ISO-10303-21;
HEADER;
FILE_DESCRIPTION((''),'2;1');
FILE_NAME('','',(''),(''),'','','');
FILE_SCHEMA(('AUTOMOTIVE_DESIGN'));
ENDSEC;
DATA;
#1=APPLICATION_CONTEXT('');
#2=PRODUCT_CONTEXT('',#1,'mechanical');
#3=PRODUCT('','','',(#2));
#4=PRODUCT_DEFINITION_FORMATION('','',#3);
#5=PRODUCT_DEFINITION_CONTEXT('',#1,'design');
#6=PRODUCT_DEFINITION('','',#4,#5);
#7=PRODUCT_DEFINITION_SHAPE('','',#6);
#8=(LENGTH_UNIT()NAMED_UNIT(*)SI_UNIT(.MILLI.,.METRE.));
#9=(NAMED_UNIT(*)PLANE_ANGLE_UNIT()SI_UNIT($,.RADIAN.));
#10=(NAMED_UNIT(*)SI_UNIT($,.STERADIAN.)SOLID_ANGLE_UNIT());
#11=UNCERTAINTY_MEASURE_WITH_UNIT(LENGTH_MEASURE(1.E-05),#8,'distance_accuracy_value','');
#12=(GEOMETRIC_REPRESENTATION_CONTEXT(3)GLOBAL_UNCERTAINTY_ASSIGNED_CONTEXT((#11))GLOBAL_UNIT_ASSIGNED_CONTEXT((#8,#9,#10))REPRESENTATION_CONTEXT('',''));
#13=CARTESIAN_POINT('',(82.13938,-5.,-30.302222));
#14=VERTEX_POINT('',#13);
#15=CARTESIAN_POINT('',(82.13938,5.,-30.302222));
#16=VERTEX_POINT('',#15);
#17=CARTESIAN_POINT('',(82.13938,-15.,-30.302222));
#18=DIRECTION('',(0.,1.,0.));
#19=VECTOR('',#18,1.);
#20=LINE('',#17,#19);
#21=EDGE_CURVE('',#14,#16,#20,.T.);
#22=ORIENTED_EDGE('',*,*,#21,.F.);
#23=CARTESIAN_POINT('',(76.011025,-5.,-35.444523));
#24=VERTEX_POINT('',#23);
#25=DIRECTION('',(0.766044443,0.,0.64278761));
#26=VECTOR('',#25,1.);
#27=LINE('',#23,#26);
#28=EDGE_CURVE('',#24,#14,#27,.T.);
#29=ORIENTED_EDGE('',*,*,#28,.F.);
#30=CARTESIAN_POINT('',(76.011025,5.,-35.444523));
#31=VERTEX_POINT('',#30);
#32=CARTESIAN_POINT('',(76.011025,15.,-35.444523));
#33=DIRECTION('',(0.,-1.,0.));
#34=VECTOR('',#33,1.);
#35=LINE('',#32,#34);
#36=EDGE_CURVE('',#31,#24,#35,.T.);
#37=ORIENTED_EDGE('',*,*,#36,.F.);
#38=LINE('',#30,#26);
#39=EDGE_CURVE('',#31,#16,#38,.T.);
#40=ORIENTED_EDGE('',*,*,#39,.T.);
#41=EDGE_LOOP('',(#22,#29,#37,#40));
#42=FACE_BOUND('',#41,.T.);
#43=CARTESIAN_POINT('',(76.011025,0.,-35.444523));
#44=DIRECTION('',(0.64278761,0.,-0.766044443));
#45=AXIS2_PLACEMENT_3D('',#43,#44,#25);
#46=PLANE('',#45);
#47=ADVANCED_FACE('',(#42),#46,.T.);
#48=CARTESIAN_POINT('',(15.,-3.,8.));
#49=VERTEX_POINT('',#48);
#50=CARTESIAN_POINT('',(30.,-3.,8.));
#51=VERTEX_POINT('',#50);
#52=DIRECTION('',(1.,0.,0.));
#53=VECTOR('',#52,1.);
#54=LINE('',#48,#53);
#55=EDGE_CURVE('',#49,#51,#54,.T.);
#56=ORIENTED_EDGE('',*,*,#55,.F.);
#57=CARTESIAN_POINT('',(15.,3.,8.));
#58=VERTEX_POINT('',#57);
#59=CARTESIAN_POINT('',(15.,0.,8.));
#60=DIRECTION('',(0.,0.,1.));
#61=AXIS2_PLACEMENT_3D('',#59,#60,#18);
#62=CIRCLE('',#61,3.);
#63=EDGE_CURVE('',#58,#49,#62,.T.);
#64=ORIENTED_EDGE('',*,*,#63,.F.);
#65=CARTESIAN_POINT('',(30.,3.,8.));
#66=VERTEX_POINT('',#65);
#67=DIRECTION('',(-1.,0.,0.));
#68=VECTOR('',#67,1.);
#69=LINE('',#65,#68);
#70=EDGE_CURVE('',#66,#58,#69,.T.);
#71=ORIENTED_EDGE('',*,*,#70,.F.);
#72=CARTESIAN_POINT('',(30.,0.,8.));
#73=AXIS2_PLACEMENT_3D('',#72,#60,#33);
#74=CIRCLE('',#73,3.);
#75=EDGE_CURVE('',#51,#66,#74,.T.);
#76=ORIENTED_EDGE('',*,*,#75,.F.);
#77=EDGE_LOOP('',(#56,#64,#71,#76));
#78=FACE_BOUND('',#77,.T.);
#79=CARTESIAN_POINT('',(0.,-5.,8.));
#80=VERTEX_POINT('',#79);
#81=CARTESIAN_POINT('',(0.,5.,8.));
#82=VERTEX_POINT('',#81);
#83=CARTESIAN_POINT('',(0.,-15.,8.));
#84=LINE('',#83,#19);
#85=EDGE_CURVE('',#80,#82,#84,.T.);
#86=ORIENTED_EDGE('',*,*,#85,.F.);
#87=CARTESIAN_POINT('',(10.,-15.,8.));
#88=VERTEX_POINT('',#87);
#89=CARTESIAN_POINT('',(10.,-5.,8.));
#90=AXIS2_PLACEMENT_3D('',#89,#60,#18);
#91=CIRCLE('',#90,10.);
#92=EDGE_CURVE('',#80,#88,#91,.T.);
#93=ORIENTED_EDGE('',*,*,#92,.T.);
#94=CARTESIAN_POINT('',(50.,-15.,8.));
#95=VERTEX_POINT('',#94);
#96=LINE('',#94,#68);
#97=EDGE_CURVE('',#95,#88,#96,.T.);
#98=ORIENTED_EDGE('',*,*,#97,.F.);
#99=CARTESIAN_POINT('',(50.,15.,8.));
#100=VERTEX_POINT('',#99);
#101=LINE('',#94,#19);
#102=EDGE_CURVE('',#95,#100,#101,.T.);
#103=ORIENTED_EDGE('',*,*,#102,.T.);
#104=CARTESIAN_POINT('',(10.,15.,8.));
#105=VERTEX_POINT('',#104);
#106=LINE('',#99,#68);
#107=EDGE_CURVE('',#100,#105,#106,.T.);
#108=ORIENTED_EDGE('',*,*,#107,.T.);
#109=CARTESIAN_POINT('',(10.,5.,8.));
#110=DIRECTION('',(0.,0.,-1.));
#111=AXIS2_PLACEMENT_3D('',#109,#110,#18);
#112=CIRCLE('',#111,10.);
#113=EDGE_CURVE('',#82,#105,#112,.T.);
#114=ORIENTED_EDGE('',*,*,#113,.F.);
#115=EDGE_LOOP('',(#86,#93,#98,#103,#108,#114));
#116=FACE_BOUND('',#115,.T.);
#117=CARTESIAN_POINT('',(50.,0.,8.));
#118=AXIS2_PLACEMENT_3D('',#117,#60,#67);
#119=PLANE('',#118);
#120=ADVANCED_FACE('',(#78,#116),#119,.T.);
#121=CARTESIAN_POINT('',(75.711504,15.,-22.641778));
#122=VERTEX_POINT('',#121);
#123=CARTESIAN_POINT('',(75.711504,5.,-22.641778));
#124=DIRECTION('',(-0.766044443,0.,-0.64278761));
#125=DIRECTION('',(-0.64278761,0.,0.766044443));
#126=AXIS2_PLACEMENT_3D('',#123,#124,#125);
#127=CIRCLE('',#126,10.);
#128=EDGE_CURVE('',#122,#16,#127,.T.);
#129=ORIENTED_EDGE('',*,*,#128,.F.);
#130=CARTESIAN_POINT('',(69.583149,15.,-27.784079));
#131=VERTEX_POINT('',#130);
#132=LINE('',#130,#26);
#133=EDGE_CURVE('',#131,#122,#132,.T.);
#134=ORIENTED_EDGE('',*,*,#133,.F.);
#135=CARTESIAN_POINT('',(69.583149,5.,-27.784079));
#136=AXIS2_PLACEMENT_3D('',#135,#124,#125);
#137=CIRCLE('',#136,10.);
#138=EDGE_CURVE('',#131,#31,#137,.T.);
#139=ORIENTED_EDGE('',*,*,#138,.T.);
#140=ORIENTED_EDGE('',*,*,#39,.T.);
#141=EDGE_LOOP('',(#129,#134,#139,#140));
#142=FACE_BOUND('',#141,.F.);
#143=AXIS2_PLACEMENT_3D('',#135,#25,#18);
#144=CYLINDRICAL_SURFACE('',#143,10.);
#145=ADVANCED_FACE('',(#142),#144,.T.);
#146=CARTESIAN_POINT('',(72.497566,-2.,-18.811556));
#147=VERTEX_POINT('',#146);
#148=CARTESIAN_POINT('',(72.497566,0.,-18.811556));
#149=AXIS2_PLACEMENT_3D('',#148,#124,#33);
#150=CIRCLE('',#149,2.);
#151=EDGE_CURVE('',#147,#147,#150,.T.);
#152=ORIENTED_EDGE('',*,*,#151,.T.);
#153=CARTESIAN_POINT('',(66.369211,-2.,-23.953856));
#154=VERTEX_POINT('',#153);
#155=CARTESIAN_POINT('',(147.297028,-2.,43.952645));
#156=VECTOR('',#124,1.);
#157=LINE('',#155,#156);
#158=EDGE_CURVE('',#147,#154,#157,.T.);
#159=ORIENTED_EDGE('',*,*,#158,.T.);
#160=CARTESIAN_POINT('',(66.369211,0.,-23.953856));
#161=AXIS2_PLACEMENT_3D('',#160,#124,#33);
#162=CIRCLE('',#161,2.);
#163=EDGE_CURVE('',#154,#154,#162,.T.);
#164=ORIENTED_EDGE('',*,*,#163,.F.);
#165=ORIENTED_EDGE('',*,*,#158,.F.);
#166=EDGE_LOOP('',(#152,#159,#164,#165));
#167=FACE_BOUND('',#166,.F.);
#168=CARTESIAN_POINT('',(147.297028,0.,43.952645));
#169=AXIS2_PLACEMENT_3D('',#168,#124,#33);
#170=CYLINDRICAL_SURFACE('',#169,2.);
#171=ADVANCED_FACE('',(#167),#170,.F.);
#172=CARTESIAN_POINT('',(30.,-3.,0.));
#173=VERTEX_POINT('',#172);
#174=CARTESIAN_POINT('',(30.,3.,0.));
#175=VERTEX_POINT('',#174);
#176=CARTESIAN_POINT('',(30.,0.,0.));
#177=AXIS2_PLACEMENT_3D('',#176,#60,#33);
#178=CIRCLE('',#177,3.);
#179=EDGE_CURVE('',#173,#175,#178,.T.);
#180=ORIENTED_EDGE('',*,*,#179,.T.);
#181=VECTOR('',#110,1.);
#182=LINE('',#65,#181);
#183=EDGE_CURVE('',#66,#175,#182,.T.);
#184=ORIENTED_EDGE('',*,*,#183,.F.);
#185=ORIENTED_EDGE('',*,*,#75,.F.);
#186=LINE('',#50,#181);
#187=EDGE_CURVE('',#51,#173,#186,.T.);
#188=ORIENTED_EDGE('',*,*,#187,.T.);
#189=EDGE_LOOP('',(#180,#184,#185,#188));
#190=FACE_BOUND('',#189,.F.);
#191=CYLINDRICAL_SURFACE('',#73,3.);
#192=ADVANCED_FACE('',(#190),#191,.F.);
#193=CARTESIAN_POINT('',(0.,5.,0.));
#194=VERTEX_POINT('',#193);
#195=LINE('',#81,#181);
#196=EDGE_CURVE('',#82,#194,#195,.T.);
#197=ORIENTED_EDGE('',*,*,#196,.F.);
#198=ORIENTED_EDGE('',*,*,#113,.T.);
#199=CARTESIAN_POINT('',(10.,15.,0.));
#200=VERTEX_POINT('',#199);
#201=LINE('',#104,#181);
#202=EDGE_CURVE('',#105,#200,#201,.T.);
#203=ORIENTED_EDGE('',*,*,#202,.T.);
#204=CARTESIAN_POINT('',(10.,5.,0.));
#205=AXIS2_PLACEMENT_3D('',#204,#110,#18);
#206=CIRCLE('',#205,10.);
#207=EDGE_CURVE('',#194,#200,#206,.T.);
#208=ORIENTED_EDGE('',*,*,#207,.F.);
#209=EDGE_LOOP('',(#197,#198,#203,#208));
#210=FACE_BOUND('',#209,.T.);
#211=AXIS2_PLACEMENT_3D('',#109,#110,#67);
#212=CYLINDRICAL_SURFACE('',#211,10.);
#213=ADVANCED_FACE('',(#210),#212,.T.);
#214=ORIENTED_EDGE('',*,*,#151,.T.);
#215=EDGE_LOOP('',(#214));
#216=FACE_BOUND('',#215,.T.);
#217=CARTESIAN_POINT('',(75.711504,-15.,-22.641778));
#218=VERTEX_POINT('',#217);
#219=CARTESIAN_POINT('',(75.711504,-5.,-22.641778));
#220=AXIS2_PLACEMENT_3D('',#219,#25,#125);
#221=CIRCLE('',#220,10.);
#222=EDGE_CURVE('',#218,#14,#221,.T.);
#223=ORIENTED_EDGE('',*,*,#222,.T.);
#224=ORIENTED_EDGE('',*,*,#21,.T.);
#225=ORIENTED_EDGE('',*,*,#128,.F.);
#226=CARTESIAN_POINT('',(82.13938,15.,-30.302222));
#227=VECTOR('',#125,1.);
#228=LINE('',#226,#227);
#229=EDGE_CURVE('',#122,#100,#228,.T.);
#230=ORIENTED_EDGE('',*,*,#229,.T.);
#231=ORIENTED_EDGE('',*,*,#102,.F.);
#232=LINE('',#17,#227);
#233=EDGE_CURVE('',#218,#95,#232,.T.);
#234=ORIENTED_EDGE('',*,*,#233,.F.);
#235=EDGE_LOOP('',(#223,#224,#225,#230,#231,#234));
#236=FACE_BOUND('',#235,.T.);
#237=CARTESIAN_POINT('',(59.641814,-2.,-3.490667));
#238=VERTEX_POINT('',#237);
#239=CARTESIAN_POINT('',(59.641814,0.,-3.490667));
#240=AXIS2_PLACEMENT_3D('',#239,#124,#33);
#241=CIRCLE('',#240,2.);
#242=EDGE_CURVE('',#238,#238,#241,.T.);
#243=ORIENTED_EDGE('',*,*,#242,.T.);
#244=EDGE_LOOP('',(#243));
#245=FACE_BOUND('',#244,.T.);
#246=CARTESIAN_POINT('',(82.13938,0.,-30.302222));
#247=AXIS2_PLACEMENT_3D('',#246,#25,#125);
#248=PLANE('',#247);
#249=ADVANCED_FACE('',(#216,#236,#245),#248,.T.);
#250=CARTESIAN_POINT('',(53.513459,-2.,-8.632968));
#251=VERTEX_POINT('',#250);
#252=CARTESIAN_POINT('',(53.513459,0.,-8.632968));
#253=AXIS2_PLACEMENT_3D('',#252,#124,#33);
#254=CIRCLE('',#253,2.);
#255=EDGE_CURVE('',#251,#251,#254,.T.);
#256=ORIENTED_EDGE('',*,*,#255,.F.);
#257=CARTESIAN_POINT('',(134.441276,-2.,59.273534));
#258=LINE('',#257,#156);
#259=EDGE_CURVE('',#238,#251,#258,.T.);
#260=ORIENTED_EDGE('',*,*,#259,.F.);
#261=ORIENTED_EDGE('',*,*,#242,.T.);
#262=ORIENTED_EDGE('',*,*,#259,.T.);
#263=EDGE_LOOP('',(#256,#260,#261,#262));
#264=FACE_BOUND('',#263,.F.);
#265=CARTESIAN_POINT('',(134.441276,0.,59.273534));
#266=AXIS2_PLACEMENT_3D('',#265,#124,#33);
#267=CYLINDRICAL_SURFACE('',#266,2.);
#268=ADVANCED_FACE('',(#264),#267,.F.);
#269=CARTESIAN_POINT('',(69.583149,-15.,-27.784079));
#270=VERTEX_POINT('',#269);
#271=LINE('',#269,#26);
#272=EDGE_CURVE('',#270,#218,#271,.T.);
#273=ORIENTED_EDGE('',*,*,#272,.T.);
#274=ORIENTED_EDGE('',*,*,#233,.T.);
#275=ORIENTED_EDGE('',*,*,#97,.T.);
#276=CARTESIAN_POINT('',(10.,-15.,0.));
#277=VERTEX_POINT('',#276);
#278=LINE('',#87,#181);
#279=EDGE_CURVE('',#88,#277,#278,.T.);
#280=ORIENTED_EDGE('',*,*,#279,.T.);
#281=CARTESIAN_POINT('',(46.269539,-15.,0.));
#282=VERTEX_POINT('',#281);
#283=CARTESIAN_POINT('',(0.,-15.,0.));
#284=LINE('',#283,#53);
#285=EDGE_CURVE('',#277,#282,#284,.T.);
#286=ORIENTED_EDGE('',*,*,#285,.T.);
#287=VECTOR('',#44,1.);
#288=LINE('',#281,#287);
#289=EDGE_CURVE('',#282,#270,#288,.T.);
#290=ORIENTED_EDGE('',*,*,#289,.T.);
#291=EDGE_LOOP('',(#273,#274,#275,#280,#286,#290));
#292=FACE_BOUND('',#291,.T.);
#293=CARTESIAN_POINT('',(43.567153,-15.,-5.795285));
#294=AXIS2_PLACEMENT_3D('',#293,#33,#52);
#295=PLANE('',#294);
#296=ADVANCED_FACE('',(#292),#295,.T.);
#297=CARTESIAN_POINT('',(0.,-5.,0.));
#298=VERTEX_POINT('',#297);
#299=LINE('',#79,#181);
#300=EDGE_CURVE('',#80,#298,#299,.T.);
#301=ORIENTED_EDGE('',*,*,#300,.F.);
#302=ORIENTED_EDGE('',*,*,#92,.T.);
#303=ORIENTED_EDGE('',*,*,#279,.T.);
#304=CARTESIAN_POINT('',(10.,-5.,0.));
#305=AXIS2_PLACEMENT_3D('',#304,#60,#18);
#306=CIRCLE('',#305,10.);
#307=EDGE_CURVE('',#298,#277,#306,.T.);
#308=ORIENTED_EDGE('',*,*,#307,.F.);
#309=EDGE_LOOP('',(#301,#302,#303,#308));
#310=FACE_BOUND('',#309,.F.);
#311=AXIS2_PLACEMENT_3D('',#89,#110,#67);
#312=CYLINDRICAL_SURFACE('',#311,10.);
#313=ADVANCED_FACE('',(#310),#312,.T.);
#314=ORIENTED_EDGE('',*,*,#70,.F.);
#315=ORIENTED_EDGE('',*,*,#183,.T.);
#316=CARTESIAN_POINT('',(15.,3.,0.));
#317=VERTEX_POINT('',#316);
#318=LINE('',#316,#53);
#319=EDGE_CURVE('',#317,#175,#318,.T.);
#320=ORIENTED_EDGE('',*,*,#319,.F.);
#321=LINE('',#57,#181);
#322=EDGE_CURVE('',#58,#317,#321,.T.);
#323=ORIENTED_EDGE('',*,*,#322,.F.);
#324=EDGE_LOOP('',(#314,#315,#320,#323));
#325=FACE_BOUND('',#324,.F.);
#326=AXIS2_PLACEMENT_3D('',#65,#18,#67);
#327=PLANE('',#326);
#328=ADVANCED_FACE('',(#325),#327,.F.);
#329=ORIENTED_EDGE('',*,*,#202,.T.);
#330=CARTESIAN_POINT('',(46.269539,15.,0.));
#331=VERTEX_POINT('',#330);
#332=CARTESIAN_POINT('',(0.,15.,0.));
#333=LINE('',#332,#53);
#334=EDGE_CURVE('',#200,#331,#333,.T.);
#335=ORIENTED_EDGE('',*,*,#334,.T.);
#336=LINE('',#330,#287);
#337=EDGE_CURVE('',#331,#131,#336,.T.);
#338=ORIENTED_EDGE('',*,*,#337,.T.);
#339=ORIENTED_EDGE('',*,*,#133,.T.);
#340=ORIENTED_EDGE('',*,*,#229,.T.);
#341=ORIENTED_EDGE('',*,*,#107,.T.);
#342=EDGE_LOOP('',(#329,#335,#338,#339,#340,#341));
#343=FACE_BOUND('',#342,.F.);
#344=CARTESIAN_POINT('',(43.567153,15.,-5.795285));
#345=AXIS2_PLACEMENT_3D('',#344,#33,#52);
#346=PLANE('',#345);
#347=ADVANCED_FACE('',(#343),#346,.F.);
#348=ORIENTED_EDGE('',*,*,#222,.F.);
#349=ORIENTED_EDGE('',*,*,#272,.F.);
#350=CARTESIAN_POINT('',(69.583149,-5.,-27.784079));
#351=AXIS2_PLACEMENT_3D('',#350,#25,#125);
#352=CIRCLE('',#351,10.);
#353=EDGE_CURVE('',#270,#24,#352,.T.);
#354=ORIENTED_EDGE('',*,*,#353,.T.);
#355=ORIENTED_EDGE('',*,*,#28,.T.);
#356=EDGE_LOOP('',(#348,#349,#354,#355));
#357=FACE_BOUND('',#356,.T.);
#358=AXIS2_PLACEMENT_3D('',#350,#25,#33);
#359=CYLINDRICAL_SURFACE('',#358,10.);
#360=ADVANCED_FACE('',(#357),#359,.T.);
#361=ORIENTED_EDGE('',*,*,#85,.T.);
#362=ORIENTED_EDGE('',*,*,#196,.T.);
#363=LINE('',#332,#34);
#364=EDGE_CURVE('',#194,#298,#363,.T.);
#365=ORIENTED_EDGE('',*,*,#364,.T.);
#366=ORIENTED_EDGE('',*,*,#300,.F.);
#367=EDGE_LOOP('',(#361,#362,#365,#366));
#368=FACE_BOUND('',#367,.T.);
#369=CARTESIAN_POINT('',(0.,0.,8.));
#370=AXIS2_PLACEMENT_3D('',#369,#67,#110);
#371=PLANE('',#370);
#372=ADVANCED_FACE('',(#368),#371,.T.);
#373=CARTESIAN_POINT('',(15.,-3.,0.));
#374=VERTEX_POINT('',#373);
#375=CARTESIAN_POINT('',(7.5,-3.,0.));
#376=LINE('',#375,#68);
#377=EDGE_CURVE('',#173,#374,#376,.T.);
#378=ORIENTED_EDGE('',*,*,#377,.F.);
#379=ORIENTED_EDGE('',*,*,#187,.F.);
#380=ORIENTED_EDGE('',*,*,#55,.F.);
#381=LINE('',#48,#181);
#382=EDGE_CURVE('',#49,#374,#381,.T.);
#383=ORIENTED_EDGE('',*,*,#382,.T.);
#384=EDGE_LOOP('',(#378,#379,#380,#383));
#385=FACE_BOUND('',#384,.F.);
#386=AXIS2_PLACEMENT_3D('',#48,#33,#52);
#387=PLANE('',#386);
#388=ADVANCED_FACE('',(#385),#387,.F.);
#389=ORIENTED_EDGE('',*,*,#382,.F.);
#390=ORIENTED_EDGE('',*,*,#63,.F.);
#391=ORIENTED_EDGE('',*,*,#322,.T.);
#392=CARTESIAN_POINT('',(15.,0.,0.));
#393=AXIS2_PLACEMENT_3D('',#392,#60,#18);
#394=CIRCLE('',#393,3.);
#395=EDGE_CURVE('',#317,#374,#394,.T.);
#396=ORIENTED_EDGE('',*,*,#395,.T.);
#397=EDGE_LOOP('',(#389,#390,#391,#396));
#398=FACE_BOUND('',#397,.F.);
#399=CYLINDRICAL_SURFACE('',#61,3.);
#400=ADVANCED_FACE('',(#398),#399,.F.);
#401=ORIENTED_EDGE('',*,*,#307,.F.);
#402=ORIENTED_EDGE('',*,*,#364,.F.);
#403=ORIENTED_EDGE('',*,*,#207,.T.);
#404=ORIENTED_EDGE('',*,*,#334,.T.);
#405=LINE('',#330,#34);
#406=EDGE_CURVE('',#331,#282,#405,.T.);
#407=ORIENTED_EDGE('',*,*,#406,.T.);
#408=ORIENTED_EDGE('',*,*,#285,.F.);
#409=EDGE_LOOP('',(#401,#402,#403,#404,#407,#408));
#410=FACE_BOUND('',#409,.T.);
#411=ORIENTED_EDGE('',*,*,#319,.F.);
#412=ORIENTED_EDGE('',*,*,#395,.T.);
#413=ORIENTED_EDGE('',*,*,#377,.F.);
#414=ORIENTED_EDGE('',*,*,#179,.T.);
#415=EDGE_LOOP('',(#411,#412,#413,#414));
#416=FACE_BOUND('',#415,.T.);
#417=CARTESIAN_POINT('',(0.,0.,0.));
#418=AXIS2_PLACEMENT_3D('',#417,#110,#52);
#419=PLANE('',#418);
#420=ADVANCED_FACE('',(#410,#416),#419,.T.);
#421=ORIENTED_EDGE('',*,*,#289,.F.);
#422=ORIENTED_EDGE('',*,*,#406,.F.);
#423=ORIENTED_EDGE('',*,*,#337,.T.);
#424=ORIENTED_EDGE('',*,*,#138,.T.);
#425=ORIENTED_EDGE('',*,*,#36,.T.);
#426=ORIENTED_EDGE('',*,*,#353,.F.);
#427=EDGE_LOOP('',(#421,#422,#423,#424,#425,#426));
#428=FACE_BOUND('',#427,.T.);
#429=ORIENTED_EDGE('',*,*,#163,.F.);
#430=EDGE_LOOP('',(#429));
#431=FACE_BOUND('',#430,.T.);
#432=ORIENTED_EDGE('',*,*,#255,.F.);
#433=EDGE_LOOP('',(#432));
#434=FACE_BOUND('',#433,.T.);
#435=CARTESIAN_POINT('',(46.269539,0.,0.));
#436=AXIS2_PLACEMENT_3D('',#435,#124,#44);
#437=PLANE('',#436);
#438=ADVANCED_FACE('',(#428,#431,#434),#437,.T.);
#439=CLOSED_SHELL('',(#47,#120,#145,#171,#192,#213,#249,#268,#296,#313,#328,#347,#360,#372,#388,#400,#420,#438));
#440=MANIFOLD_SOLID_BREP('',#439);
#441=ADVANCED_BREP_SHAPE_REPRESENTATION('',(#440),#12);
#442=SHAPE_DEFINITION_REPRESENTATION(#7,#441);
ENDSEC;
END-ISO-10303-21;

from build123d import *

# Parameters (mm, degrees)
F1_DEPTH = 15
F3_DEPTH = 43.4455230334
F5_D     = 4
F6_R     = 10


with BuildPart() as f1:
    # F0 (on Front) → F1 (new body, symmetric)
    with BuildSketch(Plane.XZ):
        Polygon((0, 8), (0, 0), (46.2695387348, 0), (76.0110249394, -35.4445230334), (82.1393804843, -30.3022221559), (50, 8), align=None)
    extrude(amount=F1_DEPTH, both=True)

    # F2 (on face) → F3 (cut, through all)
    with BuildSketch(Plane.XY.offset(8)):
        with BuildLine():
            ThreePointArc((15, 3), (12, 0), (15, -3))
            Line((15, -3), (30, -3))
            ThreePointArc((30, -3), (33, 0), (30, 3))
            Line((30, 3), (15, 3))
        make_face()
    extrude(amount=-F3_DEPTH, mode=Mode.SUBTRACT)

    # F5 (through all)
    with Locations(Plane(origin=(33.2804354537, 0, 27.9256011146), x_dir=(0, 1, 0), z_dir=(0.7660444431, 0, 0.6427876097))):
        with Locations((0, -41.0110249394), (0, -61.0110249394)):
            Hole(F5_D / 2)

    # F6
    f6_edges = [f1.edges().sort_by_distance(p)[0] for p in [
        (79.075203, -15, -32.873373),
        (79.075203, 15, -32.873373),
        (0, -15, 4),
        (0, 15, 4),
    ]]
    fillet(f6_edges, radius=F6_R)


solid = f1.part
